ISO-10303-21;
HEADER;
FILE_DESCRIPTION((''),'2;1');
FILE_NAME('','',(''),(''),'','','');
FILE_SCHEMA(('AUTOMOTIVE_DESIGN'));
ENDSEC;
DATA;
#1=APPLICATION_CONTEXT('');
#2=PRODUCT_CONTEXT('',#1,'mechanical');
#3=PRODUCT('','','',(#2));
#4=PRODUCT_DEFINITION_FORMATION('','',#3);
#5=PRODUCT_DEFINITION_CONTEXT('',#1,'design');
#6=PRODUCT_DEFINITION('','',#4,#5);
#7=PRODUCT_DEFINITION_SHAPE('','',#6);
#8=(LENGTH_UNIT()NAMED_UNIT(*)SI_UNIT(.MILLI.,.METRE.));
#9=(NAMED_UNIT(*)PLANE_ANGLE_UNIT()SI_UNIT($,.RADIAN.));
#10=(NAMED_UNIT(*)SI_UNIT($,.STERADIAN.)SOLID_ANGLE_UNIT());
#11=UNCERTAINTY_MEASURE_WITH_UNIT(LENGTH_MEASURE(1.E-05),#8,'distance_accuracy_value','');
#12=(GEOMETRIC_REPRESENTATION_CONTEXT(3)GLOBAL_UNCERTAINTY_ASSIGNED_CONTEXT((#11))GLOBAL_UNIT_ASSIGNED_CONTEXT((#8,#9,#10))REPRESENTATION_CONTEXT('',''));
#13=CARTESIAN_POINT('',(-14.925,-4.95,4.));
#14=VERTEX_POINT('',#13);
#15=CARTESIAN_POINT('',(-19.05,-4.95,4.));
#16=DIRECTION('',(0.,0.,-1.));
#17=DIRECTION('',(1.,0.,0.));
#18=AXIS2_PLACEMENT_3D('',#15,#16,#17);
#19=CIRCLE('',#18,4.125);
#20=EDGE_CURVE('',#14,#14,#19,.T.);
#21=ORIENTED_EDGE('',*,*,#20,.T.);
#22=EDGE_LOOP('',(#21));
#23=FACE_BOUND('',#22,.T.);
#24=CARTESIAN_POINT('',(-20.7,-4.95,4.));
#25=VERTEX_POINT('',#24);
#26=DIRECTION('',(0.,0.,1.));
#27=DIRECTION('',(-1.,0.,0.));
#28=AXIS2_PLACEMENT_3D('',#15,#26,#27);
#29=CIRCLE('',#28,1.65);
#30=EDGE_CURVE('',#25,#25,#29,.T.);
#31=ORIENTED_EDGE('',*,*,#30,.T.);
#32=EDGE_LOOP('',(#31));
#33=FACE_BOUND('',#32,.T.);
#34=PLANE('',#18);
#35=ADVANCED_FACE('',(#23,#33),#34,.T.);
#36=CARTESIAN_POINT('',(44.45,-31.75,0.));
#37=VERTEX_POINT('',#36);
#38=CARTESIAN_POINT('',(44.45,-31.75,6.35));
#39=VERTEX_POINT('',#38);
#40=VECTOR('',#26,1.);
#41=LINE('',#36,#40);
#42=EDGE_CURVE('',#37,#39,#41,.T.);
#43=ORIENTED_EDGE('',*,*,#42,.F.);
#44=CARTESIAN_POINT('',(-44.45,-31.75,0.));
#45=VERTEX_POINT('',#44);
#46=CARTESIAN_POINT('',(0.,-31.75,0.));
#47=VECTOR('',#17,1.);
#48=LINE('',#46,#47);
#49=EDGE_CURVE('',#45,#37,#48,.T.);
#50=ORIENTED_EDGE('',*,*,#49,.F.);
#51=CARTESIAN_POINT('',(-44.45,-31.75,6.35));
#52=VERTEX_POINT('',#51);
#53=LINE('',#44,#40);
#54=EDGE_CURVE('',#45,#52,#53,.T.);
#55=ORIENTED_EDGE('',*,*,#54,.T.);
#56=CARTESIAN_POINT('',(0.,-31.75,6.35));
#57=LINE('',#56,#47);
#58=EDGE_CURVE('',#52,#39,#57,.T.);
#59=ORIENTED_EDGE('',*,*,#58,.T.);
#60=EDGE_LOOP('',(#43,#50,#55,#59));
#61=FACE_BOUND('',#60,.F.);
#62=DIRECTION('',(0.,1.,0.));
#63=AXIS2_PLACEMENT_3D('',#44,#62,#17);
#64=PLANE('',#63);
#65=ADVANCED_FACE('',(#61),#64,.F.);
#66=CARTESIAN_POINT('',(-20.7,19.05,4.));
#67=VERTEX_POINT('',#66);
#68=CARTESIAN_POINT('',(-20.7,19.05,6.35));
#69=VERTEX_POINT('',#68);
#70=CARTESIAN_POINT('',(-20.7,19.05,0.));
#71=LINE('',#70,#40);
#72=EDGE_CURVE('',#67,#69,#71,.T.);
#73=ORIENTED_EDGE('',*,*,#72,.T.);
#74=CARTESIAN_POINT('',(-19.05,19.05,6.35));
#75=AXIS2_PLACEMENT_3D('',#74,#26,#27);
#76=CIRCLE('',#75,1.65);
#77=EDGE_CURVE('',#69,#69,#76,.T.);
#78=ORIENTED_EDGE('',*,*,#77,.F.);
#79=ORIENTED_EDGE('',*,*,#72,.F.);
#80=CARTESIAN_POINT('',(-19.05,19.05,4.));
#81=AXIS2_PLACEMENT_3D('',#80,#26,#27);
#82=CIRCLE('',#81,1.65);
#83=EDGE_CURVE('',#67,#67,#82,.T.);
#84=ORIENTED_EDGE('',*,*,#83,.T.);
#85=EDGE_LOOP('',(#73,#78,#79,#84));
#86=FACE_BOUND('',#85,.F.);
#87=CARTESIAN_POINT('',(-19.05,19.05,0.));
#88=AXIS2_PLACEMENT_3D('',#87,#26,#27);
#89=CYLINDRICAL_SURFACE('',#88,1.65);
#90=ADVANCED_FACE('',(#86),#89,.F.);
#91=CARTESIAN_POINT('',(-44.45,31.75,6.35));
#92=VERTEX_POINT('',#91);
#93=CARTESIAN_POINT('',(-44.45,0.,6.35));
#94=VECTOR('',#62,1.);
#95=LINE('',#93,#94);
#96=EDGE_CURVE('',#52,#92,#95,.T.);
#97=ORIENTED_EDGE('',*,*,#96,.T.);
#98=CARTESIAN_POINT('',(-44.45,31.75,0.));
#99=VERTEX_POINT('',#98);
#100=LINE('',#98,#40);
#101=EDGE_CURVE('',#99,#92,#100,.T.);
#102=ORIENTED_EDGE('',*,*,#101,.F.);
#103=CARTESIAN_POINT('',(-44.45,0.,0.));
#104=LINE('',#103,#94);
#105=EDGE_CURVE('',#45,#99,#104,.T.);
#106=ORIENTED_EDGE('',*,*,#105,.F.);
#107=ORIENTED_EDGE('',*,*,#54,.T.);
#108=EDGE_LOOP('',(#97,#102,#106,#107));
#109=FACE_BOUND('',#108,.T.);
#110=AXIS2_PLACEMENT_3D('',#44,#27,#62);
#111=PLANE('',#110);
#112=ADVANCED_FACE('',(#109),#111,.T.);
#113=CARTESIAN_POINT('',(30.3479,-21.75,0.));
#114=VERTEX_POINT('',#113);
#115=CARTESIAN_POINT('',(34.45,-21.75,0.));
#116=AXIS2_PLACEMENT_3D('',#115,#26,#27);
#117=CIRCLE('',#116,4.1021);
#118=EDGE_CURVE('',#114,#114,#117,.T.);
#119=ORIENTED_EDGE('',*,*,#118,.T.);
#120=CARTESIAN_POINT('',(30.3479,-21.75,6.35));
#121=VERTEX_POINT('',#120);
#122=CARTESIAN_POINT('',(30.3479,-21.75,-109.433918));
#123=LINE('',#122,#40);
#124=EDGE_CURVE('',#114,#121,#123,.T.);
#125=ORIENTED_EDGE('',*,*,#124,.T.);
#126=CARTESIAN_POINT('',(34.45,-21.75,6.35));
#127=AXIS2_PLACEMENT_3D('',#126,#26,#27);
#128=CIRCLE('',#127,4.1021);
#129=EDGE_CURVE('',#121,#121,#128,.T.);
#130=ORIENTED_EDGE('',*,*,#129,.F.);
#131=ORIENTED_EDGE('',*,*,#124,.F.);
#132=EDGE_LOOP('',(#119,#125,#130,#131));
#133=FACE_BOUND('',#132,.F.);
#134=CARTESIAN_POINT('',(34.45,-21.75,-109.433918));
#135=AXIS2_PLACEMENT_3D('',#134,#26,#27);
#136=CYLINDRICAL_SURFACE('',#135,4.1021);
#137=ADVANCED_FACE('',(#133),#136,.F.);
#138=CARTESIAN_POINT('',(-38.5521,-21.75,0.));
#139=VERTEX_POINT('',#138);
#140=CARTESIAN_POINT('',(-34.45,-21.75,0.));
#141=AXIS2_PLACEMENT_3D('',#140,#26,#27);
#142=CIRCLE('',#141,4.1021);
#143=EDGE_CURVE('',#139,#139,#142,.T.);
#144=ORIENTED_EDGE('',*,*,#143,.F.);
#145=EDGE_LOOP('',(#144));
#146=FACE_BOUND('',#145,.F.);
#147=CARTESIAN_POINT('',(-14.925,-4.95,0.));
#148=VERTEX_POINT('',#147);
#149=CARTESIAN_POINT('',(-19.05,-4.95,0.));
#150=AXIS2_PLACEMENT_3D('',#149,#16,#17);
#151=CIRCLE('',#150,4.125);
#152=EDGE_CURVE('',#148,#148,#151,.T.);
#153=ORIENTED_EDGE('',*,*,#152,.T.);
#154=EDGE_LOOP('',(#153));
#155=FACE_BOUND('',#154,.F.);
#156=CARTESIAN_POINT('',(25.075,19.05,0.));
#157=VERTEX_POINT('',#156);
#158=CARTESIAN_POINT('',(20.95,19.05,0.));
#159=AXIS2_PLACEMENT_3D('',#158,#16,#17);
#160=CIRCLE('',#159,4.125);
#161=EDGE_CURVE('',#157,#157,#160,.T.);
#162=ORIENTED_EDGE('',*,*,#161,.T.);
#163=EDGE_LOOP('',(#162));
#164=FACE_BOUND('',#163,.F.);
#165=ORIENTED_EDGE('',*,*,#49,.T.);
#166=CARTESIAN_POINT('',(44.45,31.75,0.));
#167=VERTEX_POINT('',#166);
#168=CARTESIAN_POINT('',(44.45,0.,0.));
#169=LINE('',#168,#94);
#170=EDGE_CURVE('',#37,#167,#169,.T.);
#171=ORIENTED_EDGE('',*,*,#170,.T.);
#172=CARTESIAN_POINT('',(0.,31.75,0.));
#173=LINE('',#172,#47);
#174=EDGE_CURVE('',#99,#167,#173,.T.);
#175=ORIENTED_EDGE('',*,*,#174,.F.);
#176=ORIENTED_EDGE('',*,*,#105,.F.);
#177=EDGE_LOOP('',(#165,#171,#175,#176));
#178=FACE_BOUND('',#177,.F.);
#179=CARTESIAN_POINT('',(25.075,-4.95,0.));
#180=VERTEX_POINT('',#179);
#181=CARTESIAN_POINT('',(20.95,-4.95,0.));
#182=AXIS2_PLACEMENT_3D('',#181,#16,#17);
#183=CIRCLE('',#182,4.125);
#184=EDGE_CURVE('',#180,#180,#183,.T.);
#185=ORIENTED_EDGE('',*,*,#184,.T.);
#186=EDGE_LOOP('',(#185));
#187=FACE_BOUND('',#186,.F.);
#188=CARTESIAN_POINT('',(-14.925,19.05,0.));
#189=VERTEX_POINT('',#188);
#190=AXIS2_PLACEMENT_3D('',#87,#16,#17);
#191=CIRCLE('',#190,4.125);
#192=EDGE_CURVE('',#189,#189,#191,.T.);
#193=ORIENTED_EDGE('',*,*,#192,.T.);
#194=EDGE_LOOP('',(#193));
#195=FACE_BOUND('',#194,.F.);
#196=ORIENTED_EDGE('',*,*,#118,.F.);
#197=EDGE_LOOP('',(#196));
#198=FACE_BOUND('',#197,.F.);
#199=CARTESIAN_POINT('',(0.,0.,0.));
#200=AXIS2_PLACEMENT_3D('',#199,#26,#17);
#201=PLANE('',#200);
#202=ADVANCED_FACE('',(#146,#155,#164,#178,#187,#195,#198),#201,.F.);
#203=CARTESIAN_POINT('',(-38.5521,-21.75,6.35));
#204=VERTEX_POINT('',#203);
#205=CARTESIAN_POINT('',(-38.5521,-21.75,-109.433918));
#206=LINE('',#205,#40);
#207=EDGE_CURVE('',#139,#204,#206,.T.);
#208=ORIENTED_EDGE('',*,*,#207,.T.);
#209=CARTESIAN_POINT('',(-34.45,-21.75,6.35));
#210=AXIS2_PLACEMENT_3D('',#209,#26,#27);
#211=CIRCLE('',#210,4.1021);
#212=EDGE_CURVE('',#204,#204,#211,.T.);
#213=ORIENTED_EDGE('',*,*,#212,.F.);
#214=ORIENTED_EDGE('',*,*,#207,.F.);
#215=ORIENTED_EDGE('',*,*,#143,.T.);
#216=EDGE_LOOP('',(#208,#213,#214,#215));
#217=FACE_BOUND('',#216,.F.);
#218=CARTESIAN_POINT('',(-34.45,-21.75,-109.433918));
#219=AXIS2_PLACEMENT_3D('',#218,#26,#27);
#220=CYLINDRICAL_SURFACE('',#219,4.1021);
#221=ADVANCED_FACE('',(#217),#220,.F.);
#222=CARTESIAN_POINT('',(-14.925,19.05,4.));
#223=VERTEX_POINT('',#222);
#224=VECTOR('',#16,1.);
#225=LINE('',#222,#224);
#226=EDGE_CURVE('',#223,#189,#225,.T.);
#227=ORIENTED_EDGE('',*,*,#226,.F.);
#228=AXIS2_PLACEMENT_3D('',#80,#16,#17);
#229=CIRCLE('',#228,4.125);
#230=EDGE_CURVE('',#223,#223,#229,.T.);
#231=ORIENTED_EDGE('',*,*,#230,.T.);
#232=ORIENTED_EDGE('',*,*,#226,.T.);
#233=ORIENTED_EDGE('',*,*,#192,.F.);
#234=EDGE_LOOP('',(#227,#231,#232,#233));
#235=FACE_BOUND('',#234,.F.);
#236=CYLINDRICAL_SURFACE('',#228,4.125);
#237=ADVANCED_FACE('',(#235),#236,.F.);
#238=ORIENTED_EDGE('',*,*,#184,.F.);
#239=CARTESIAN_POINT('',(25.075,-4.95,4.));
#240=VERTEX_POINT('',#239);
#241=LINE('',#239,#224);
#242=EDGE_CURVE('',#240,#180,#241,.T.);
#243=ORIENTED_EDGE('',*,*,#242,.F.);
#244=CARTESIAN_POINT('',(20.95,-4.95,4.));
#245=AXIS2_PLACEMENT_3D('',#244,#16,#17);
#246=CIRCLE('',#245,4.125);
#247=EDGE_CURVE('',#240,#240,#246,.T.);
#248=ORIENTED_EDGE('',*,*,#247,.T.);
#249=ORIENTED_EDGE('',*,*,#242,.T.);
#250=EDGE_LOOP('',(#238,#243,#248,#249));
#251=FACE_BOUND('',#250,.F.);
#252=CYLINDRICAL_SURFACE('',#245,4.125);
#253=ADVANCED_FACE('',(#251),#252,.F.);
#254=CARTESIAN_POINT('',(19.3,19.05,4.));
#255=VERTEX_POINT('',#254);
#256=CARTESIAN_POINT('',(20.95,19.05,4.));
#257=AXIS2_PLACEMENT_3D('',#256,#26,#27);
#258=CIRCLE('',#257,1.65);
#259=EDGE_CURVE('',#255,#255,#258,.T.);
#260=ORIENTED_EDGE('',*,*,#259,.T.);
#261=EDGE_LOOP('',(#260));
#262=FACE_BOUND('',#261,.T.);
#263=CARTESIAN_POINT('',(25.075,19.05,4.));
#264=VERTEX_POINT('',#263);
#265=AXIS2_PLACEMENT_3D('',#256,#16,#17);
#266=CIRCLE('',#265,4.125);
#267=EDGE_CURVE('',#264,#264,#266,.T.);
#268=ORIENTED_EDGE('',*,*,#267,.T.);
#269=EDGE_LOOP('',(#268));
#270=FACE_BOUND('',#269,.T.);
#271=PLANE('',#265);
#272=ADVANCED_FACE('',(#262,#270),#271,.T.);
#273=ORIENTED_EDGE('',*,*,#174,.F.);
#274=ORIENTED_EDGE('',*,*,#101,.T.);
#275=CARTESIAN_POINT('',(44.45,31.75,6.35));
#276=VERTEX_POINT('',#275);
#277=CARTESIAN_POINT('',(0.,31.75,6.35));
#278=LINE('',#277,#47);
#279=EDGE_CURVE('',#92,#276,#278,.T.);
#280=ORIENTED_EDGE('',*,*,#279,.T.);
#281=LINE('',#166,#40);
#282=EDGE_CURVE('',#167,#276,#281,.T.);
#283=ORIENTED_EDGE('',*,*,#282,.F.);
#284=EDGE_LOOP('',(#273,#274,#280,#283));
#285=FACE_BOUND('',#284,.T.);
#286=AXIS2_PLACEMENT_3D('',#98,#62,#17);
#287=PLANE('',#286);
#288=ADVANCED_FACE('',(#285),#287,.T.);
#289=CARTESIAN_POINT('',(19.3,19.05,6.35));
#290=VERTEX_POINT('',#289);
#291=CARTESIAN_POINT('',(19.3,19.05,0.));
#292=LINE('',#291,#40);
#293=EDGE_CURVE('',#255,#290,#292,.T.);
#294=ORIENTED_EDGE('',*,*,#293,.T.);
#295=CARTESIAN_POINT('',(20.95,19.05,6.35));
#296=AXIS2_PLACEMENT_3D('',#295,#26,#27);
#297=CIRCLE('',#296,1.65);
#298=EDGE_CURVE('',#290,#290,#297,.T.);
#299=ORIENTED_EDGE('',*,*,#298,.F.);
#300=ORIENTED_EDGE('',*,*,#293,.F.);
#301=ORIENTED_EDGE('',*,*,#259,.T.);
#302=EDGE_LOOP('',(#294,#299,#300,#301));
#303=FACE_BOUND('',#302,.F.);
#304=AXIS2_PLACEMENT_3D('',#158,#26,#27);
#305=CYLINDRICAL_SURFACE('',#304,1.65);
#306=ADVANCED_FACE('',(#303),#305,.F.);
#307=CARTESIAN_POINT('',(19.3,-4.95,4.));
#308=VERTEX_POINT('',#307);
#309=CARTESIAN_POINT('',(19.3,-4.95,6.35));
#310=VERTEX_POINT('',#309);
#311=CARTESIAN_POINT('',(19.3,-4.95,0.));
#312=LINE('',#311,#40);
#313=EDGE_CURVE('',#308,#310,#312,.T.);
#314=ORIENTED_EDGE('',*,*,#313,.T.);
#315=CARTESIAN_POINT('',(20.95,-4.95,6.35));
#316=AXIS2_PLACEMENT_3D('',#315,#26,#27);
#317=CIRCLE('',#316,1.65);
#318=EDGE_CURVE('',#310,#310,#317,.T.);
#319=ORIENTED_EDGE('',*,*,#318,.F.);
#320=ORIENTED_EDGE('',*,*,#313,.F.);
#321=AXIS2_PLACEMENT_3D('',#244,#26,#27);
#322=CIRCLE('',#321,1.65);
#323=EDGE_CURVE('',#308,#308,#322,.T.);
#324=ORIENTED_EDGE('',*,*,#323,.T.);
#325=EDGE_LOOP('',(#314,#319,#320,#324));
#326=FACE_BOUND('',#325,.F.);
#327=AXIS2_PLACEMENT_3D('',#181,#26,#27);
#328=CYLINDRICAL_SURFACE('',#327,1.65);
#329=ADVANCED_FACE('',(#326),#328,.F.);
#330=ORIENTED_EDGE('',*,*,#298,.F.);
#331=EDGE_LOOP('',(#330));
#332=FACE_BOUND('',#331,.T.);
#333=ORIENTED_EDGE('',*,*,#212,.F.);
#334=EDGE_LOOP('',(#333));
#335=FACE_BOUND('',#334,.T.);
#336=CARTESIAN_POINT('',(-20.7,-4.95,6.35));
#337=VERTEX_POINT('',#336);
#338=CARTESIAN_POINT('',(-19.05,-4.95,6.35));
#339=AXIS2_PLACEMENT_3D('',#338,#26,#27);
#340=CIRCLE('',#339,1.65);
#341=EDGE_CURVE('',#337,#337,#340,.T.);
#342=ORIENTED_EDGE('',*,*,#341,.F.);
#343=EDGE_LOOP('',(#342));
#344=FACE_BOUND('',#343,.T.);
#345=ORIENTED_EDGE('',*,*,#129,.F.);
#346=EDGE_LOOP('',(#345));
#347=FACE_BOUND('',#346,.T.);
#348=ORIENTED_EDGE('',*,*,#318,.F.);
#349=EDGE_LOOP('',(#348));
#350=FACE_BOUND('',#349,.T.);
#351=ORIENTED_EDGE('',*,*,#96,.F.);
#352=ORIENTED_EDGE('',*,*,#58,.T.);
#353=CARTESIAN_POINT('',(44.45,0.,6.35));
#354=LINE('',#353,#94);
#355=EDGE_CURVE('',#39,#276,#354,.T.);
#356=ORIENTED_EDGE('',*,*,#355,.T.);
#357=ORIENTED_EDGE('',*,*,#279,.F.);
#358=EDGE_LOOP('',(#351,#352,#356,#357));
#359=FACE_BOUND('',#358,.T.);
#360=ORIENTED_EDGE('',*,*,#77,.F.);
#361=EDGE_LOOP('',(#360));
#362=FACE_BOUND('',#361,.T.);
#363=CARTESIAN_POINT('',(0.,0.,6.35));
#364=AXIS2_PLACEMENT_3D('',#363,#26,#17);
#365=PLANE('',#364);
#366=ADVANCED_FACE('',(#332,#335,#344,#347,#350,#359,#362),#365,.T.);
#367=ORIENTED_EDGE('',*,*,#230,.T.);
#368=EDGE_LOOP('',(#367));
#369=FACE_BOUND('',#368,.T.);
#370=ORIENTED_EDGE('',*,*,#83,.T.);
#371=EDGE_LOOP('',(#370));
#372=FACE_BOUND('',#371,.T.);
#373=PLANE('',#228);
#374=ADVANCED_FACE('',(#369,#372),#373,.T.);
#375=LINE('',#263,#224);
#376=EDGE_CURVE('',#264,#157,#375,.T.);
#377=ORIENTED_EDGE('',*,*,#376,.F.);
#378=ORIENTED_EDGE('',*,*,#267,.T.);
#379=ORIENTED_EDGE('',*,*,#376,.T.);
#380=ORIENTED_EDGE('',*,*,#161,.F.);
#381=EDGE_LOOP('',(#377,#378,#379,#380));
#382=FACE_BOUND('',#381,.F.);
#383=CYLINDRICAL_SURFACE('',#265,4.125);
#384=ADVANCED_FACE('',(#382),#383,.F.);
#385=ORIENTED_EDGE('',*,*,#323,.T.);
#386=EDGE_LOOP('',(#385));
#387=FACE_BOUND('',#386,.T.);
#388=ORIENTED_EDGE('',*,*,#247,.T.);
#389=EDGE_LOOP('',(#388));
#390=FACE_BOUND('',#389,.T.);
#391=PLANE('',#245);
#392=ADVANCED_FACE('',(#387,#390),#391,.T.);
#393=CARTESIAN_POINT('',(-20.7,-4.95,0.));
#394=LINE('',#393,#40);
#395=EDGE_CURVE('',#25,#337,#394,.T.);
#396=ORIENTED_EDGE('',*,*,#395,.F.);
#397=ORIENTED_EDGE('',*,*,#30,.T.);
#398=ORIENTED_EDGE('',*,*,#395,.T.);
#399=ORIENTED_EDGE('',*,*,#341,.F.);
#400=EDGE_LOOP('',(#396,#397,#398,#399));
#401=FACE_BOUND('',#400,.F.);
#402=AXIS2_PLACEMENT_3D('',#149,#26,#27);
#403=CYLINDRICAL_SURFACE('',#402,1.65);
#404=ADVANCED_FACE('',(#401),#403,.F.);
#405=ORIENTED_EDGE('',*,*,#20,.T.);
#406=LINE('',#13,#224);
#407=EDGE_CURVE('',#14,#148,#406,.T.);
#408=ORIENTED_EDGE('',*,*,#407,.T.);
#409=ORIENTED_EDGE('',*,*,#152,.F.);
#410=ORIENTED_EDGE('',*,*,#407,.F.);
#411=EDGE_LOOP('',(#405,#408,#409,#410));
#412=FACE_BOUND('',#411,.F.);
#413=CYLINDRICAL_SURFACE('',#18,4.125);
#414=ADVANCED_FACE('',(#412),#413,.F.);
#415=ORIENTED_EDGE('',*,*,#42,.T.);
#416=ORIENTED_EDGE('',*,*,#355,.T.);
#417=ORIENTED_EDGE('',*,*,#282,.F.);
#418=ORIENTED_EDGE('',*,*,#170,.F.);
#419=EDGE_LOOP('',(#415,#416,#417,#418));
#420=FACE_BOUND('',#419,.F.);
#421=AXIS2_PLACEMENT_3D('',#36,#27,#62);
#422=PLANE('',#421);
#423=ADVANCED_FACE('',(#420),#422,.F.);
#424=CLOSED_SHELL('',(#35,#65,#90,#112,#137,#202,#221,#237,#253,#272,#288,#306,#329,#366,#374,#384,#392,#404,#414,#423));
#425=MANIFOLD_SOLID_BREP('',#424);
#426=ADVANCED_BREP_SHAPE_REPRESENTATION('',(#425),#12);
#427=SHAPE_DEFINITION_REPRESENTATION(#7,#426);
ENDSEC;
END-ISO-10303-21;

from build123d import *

# Parameters (mm, degrees)
F0_W           = 88.9
F0_H           = 63.5
F1_DEPTH       = 6.35
F2_D           = 8.2042
F3_D           = 3.3
F3_CBORE_D     = 8.25
F3_CBORE_DEPTH = 4


# Not quite as in the source:
# - a feature names something its author has since deleted; it is built from what else it names


with BuildPart() as f1:
    # F0 (on Top) → F1 (new body)
    with BuildSketch(Plane.XY):
        Rectangle(F0_W, F0_H)
    extrude(amount=F1_DEPTH)

    # F2 (through all)
    with Locations(Plane(origin=(0, 0, 0), x_dir=(1, 0, 0), z_dir=(0, 0, -1))):
        with Locations((-34.45, 21.75), (34.45, 21.75)):
            Hole(F2_D / 2)

    # F3 (through all)
    with Locations(Plane(origin=(0, 0, 0), x_dir=(1, 0, 0), z_dir=(0, 0, -1))):
        with Locations((-19.05, -19.05), (-19.05, 4.95), (20.95, -19.05), (20.95, 4.95)):
            CounterBoreHole(F3_D / 2, F3_CBORE_D / 2, F3_CBORE_DEPTH)


solid = f1.part
